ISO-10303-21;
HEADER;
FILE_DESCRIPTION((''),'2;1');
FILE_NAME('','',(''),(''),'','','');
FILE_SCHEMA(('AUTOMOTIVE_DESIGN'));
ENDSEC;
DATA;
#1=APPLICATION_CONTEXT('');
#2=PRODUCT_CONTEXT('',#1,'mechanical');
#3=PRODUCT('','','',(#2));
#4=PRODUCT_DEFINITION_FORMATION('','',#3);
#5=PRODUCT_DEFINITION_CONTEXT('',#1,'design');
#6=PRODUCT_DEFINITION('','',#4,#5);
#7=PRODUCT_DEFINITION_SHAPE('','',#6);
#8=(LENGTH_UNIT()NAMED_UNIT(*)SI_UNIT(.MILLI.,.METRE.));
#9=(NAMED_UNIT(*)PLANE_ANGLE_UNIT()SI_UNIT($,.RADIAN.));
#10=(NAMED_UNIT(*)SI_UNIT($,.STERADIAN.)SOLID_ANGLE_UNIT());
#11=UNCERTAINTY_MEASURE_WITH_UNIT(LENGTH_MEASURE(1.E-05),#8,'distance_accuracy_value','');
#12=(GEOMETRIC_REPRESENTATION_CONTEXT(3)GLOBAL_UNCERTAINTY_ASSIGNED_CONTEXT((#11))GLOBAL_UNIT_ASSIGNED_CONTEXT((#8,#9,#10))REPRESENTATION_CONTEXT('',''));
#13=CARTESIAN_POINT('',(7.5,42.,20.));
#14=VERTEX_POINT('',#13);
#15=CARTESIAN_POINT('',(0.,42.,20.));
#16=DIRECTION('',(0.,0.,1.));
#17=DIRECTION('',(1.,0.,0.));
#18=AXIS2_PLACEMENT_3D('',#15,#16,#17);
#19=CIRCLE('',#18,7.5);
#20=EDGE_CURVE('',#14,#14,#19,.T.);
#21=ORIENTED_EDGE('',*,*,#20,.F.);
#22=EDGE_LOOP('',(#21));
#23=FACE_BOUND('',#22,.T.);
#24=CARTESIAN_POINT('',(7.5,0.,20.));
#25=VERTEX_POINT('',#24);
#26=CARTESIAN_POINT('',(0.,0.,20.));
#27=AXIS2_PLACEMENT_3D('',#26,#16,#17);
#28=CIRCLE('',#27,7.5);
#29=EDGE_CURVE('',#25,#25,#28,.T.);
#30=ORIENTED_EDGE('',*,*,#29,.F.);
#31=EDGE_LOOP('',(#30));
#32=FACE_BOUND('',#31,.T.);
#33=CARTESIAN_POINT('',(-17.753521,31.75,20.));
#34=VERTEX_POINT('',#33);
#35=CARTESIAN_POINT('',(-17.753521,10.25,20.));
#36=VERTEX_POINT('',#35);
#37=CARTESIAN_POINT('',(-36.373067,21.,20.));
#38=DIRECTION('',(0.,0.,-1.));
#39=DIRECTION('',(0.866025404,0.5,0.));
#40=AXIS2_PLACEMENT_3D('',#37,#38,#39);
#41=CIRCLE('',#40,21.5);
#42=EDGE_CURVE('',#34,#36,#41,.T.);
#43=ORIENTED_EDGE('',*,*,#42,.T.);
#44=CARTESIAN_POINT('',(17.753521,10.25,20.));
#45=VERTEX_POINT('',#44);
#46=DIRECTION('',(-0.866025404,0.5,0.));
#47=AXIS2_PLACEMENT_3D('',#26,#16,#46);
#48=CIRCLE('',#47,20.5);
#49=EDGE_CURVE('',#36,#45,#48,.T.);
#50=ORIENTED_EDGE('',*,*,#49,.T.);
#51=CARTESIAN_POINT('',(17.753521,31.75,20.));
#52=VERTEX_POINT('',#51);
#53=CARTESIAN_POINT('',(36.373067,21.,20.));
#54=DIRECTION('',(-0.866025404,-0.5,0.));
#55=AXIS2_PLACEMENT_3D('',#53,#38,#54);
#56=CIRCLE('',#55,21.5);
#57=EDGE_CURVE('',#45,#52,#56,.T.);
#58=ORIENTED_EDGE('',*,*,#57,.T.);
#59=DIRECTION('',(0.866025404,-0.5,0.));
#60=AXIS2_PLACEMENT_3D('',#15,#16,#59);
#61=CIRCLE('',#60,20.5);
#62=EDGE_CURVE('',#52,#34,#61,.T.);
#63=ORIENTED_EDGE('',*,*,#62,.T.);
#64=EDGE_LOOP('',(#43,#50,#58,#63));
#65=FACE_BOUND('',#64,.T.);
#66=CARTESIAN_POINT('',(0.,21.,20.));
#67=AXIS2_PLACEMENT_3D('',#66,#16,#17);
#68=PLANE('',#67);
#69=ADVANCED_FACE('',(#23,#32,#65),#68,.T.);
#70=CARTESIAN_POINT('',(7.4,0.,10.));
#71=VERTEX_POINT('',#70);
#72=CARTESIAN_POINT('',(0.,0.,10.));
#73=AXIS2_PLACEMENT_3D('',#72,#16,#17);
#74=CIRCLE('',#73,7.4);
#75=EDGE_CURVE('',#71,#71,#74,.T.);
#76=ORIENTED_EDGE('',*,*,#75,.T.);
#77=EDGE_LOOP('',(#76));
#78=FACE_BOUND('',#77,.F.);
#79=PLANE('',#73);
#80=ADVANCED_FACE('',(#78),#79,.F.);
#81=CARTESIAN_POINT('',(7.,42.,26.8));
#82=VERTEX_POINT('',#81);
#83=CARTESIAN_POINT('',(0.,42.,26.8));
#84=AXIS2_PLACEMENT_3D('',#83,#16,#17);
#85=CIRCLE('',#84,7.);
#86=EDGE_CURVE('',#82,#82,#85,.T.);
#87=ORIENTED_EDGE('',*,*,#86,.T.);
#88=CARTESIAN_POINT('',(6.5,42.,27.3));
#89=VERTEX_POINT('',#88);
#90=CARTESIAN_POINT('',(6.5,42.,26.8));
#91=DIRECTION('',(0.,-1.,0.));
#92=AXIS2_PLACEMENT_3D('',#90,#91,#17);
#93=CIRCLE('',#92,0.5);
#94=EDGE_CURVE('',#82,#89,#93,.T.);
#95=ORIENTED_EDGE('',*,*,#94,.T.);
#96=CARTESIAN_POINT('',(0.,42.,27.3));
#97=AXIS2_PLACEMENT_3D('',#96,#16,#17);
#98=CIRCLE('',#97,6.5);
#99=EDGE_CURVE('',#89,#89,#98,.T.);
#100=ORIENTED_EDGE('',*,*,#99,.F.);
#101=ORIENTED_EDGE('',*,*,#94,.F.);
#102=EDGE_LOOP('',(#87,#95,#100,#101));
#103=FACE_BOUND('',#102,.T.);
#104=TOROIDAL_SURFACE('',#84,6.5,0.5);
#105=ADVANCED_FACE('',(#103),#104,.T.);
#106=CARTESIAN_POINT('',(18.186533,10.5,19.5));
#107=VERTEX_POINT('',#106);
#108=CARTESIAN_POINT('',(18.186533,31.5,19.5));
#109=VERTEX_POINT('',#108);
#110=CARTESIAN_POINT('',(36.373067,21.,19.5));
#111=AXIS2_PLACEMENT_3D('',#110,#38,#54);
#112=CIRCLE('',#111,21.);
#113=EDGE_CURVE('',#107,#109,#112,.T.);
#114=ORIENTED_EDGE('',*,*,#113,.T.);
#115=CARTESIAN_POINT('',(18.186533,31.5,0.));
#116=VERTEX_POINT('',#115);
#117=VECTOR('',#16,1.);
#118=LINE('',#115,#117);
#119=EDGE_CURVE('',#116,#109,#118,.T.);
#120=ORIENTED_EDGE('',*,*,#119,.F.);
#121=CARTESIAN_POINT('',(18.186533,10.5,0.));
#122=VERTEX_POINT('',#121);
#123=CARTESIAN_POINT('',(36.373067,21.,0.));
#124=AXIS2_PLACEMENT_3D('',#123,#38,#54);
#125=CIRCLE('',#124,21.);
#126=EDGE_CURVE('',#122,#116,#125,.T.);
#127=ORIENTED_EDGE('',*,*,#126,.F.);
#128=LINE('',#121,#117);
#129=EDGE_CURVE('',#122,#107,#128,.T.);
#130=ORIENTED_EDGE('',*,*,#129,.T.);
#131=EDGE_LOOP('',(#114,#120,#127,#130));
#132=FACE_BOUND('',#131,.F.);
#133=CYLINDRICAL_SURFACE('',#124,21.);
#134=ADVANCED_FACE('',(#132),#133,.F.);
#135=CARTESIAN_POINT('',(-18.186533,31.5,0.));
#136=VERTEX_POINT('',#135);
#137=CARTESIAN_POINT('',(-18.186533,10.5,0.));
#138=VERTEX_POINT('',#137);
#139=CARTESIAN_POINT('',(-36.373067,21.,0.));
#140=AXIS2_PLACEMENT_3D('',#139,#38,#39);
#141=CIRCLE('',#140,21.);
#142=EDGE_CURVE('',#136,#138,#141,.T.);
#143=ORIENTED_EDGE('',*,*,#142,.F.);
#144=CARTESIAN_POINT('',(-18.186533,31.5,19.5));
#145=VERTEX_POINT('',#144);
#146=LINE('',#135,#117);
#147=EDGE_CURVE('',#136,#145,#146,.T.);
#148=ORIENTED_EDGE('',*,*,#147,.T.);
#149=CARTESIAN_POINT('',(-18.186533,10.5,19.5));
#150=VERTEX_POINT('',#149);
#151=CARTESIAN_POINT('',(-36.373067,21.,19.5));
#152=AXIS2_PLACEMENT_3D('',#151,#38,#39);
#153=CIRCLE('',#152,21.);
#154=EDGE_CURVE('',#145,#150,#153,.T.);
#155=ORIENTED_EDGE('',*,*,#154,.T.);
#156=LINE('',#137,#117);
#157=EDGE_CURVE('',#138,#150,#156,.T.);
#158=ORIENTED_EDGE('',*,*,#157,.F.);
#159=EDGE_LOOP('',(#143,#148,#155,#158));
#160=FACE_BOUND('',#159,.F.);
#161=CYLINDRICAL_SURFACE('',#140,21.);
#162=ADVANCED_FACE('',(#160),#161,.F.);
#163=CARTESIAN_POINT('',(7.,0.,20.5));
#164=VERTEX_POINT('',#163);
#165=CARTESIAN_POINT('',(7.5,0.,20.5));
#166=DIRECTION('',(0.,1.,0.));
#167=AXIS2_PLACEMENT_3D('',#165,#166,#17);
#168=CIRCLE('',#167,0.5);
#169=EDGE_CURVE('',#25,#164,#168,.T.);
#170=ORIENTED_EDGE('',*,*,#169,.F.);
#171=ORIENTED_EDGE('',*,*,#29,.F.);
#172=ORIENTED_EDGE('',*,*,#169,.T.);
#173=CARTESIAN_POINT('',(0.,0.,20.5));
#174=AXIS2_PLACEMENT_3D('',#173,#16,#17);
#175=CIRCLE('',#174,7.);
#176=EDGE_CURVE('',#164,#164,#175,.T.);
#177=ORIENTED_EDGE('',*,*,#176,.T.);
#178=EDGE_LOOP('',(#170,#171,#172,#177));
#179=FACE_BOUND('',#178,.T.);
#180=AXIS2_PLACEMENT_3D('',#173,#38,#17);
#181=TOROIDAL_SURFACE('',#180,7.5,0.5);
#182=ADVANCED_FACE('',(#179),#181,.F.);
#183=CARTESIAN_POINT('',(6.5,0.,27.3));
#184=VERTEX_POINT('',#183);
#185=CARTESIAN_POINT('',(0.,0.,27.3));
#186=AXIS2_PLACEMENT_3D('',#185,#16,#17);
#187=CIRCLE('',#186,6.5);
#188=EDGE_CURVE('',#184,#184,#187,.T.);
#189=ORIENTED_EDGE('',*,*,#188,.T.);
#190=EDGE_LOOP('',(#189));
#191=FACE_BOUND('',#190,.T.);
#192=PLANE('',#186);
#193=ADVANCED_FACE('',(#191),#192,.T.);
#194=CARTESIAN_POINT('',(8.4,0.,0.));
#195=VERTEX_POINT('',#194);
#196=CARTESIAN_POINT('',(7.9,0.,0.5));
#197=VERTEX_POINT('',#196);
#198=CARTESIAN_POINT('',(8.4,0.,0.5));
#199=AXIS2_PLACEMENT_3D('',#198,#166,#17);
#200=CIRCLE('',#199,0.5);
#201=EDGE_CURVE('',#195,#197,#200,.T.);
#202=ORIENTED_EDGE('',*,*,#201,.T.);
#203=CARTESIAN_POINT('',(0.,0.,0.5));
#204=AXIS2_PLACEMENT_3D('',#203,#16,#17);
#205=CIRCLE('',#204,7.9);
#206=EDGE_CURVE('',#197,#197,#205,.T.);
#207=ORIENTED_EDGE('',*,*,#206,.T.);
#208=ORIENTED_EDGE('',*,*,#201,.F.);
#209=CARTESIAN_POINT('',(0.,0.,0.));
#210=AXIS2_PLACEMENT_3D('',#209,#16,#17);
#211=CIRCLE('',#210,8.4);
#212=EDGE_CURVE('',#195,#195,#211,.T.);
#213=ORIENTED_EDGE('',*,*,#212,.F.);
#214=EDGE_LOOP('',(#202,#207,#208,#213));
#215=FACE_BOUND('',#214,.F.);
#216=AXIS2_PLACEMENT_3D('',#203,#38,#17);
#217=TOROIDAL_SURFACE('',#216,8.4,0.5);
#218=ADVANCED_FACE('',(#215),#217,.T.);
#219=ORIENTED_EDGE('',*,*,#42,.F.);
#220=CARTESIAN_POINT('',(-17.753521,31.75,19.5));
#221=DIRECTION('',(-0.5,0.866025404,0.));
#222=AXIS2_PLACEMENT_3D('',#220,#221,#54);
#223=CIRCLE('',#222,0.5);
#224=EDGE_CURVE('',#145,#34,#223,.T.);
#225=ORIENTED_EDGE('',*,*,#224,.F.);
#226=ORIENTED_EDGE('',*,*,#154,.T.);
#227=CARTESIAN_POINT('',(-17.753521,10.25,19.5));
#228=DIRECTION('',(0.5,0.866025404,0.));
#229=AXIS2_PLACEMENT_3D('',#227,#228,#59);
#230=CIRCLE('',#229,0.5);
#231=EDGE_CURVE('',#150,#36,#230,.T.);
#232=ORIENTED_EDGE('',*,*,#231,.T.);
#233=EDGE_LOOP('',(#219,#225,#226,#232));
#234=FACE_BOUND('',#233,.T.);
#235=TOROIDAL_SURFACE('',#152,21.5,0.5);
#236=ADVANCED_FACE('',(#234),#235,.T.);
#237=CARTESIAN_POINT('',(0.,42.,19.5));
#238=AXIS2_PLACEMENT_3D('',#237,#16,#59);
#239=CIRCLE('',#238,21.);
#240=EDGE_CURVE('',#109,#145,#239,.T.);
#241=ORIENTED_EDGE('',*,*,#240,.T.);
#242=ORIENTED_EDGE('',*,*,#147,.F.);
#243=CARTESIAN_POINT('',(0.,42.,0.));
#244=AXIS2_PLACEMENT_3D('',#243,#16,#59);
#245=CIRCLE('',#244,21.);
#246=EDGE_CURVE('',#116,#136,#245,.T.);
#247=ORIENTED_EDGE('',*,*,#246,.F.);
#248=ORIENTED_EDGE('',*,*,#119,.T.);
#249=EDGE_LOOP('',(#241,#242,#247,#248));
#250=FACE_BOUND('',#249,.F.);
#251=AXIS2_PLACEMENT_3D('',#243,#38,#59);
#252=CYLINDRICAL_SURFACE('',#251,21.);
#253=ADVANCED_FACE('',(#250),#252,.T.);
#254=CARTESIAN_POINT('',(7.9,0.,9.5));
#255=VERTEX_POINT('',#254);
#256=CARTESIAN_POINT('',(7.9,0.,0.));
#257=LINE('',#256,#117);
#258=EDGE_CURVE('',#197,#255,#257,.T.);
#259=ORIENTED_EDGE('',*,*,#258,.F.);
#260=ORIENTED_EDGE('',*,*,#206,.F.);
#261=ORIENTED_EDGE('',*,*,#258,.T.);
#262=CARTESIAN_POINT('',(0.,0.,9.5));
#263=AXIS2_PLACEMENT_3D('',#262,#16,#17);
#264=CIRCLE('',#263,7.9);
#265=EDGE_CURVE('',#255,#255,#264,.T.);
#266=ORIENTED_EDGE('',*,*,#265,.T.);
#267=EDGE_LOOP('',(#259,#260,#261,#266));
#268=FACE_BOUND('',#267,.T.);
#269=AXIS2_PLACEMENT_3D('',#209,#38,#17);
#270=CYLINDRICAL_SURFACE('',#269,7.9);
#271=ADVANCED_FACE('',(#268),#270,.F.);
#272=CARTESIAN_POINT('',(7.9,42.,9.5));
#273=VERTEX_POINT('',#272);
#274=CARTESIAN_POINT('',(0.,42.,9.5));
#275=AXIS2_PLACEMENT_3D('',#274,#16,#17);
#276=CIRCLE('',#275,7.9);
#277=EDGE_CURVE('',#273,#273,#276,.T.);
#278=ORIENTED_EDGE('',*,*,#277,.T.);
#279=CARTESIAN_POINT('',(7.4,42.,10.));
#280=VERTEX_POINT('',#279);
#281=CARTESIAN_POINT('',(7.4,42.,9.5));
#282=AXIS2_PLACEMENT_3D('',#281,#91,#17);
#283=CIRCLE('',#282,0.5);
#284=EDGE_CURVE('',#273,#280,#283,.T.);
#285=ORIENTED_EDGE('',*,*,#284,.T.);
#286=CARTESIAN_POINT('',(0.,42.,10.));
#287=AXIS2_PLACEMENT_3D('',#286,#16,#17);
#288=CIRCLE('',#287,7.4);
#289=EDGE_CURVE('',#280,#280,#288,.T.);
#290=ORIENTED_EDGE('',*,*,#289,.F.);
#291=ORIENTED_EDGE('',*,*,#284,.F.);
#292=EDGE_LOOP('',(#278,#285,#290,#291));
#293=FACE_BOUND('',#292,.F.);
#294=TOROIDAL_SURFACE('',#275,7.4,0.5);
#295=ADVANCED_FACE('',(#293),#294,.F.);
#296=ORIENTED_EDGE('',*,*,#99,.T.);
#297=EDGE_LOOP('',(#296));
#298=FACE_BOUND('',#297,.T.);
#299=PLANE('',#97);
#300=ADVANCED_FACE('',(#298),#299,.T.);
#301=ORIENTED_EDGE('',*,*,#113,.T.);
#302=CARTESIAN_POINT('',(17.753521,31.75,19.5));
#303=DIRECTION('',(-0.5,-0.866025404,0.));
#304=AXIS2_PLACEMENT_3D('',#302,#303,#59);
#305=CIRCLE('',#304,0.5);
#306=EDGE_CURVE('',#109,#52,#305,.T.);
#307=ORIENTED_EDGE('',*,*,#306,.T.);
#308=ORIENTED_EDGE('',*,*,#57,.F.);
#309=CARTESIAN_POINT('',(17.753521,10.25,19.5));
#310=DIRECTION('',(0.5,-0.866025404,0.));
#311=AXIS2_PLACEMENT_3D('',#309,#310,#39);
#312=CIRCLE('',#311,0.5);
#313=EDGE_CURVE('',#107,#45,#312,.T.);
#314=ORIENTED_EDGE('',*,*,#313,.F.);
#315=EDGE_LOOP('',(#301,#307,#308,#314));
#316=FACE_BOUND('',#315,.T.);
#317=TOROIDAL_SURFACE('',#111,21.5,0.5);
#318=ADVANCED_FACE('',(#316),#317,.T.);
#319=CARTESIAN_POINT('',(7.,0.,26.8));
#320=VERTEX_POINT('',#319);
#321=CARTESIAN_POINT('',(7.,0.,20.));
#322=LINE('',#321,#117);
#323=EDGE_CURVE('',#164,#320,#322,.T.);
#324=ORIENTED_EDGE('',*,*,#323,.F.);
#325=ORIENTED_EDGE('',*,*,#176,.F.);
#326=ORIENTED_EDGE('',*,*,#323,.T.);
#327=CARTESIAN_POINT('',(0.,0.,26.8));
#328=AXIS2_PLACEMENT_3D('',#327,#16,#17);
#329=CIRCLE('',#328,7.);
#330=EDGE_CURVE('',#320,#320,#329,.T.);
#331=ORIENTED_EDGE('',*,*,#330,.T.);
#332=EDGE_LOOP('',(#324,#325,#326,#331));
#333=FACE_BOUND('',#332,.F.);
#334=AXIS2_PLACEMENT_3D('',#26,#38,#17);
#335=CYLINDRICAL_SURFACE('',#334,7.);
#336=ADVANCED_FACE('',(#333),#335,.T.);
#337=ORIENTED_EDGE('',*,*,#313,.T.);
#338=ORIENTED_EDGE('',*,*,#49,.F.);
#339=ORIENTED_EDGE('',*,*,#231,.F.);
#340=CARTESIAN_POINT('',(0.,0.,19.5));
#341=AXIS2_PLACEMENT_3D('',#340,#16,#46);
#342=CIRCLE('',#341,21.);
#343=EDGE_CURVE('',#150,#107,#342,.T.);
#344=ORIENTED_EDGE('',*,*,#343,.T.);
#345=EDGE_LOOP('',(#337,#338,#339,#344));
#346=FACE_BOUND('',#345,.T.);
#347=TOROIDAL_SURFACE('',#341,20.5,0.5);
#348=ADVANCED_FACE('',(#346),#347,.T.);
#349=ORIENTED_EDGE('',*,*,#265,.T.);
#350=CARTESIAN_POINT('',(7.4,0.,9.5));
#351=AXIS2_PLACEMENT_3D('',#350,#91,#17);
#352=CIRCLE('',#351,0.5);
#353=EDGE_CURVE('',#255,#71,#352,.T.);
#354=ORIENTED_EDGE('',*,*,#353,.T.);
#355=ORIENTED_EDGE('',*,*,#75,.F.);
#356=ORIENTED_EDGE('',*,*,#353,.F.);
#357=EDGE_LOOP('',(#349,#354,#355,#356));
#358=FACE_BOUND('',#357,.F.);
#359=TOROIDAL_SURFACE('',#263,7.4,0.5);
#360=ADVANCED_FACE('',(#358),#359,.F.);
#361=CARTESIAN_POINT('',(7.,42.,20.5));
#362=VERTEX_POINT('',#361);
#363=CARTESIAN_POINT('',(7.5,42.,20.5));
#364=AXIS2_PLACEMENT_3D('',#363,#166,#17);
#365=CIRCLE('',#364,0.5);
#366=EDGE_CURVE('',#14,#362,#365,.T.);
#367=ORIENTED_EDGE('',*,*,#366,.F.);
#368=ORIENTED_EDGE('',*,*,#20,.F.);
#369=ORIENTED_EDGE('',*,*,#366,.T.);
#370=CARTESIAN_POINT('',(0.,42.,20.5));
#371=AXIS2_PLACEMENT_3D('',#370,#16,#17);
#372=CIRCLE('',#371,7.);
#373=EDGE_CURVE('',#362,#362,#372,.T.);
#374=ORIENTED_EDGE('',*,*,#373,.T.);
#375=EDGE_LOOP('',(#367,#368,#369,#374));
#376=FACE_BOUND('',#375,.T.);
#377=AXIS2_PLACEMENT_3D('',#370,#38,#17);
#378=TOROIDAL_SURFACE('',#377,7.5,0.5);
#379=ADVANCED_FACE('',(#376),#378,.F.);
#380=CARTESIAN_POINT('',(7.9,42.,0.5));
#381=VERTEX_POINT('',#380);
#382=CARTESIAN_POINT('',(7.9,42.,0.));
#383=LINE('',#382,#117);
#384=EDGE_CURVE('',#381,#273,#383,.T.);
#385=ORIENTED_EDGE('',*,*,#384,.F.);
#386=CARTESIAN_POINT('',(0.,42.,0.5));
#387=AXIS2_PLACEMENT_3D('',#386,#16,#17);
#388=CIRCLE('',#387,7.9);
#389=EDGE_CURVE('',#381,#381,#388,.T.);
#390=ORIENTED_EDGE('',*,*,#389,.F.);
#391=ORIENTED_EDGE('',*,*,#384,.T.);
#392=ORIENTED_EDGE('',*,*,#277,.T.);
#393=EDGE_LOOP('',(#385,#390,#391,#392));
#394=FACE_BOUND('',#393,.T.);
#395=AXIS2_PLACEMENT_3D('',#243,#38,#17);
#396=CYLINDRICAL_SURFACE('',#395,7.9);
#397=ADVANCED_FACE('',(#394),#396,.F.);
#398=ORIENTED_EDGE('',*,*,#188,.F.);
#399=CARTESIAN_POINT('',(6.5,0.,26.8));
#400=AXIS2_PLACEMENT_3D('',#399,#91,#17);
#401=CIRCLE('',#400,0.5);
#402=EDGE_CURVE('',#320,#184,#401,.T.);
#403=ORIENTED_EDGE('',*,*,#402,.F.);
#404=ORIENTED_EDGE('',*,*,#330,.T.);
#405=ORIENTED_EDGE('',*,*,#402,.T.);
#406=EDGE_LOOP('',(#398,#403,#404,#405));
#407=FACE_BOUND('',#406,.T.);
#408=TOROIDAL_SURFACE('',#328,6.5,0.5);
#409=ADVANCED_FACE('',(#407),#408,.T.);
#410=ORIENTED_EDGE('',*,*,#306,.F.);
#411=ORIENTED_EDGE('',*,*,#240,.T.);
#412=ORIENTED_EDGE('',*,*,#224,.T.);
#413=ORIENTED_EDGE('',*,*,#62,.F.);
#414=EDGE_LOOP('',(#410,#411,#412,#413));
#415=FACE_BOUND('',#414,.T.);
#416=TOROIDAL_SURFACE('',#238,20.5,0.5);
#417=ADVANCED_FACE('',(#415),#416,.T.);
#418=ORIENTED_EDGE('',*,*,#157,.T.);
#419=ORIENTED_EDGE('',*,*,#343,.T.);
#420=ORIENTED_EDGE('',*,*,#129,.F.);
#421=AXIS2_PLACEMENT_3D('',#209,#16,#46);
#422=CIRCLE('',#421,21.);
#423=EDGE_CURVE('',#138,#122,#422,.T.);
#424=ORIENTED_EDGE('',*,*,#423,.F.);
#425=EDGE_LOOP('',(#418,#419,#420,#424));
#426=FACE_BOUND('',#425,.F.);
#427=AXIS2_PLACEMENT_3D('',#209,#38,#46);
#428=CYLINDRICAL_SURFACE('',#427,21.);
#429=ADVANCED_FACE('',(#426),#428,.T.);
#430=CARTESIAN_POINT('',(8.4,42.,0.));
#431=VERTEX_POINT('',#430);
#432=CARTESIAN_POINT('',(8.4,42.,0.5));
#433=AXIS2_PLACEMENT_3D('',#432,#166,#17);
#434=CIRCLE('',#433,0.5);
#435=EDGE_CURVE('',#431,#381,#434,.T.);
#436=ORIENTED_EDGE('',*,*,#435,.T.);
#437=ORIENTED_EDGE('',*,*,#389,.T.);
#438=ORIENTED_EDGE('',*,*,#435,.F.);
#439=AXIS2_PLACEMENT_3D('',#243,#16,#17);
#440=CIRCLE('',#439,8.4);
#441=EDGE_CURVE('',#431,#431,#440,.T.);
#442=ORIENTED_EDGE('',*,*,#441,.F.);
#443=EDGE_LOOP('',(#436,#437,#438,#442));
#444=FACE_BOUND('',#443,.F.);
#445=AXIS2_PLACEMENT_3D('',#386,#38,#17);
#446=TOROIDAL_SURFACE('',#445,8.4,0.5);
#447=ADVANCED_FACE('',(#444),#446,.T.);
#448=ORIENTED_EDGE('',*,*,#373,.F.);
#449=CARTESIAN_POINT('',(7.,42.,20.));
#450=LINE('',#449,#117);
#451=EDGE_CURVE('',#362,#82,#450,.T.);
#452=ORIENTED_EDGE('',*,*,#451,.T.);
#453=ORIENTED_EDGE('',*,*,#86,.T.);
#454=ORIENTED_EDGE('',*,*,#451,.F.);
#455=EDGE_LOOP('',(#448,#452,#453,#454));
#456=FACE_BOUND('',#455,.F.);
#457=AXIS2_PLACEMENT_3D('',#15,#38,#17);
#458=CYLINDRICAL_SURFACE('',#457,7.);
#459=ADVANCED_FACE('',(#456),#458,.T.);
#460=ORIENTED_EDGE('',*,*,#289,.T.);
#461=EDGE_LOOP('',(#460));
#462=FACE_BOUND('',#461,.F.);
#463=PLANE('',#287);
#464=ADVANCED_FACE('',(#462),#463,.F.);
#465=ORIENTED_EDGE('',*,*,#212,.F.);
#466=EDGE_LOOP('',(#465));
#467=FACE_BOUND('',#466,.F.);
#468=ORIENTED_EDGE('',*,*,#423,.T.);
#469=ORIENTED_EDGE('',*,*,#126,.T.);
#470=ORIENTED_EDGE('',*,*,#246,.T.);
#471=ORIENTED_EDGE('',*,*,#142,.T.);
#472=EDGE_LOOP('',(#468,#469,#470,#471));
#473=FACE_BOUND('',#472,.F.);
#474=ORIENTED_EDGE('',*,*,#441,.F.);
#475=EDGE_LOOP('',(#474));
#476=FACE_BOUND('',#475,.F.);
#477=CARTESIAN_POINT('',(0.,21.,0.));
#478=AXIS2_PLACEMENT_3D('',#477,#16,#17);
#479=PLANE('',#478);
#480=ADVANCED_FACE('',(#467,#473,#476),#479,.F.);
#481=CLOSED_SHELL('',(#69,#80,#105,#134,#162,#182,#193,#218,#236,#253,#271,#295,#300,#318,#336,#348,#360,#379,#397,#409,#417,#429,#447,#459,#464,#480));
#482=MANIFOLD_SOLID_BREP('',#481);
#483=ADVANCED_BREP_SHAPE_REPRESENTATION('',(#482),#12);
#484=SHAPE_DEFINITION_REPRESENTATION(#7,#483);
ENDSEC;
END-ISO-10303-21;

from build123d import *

# Parameters (mm, degrees)
F4_R     = 7.9
F5_DEPTH = 20
F6_DEPTH = 10
F7_R     = 7
F8_DEPTH = 7.3
F9_R     = 0.5


# Not quite as in the source:
# - a feature names something its author has since deleted; it is built from what else it names


with BuildPart() as f5:
    # F4 (on Top) → F5 (new body)
    with BuildSketch(Plane.XY):
        with BuildLine():
            ThreePointArc((18.1865334795, 10.5), (15.3730669589, 21), (18.1865334795, 31.5))
            ThreePointArc((18.1865334795, 31.5), (0, 63), (-18.1865334795, 31.5))
            ThreePointArc((-18.1865334795, 31.5), (-15.3730669589, 21), (-18.1865334795, 10.5))
            ThreePointArc((-18.1865334795, 10.5), (0, -21), (18.1865334795, 10.5))
        make_face()
        Circle(F4_R, mode=Mode.SUBTRACT)
        with Locations((0, 42)):
            Circle(F4_R, mode=Mode.SUBTRACT)
        with Locations((0, 42)):
            Circle(F4_R)
        Circle(F4_R)
    extrude(amount=F5_DEPTH)

    # F4 (on Top) → F6 (cut)
    with BuildSketch(Plane.XY):
        with Locations((0, 42)):
            Circle(F4_R)
        Circle(F4_R)
    extrude(amount=F6_DEPTH, mode=Mode.SUBTRACT)

    # F7 (on face) → F8 (join)
    with BuildSketch(Plane.XY.offset(20)):
        Circle(F7_R)
        with Locations((0, 42)):
            Circle(F7_R)
    extrude(amount=F8_DEPTH)

    # F9
    f9_edges = [f5.edges().sort_by_distance(p)[0] for p in [
        (-7, 0, 27.3),
        (-7.9, 42, 0),
        (-7.9, 42, 10),
        (-7.9, 0, 0),
        (-7.9, 0, 10),
        (-7, 42, 27.3),
        (-7, 42, 20),
        (0, 63, 20),
        (-7, 0, 20),
    ]]
    fillet(f9_edges, radius=F9_R)


solid = f5.part
